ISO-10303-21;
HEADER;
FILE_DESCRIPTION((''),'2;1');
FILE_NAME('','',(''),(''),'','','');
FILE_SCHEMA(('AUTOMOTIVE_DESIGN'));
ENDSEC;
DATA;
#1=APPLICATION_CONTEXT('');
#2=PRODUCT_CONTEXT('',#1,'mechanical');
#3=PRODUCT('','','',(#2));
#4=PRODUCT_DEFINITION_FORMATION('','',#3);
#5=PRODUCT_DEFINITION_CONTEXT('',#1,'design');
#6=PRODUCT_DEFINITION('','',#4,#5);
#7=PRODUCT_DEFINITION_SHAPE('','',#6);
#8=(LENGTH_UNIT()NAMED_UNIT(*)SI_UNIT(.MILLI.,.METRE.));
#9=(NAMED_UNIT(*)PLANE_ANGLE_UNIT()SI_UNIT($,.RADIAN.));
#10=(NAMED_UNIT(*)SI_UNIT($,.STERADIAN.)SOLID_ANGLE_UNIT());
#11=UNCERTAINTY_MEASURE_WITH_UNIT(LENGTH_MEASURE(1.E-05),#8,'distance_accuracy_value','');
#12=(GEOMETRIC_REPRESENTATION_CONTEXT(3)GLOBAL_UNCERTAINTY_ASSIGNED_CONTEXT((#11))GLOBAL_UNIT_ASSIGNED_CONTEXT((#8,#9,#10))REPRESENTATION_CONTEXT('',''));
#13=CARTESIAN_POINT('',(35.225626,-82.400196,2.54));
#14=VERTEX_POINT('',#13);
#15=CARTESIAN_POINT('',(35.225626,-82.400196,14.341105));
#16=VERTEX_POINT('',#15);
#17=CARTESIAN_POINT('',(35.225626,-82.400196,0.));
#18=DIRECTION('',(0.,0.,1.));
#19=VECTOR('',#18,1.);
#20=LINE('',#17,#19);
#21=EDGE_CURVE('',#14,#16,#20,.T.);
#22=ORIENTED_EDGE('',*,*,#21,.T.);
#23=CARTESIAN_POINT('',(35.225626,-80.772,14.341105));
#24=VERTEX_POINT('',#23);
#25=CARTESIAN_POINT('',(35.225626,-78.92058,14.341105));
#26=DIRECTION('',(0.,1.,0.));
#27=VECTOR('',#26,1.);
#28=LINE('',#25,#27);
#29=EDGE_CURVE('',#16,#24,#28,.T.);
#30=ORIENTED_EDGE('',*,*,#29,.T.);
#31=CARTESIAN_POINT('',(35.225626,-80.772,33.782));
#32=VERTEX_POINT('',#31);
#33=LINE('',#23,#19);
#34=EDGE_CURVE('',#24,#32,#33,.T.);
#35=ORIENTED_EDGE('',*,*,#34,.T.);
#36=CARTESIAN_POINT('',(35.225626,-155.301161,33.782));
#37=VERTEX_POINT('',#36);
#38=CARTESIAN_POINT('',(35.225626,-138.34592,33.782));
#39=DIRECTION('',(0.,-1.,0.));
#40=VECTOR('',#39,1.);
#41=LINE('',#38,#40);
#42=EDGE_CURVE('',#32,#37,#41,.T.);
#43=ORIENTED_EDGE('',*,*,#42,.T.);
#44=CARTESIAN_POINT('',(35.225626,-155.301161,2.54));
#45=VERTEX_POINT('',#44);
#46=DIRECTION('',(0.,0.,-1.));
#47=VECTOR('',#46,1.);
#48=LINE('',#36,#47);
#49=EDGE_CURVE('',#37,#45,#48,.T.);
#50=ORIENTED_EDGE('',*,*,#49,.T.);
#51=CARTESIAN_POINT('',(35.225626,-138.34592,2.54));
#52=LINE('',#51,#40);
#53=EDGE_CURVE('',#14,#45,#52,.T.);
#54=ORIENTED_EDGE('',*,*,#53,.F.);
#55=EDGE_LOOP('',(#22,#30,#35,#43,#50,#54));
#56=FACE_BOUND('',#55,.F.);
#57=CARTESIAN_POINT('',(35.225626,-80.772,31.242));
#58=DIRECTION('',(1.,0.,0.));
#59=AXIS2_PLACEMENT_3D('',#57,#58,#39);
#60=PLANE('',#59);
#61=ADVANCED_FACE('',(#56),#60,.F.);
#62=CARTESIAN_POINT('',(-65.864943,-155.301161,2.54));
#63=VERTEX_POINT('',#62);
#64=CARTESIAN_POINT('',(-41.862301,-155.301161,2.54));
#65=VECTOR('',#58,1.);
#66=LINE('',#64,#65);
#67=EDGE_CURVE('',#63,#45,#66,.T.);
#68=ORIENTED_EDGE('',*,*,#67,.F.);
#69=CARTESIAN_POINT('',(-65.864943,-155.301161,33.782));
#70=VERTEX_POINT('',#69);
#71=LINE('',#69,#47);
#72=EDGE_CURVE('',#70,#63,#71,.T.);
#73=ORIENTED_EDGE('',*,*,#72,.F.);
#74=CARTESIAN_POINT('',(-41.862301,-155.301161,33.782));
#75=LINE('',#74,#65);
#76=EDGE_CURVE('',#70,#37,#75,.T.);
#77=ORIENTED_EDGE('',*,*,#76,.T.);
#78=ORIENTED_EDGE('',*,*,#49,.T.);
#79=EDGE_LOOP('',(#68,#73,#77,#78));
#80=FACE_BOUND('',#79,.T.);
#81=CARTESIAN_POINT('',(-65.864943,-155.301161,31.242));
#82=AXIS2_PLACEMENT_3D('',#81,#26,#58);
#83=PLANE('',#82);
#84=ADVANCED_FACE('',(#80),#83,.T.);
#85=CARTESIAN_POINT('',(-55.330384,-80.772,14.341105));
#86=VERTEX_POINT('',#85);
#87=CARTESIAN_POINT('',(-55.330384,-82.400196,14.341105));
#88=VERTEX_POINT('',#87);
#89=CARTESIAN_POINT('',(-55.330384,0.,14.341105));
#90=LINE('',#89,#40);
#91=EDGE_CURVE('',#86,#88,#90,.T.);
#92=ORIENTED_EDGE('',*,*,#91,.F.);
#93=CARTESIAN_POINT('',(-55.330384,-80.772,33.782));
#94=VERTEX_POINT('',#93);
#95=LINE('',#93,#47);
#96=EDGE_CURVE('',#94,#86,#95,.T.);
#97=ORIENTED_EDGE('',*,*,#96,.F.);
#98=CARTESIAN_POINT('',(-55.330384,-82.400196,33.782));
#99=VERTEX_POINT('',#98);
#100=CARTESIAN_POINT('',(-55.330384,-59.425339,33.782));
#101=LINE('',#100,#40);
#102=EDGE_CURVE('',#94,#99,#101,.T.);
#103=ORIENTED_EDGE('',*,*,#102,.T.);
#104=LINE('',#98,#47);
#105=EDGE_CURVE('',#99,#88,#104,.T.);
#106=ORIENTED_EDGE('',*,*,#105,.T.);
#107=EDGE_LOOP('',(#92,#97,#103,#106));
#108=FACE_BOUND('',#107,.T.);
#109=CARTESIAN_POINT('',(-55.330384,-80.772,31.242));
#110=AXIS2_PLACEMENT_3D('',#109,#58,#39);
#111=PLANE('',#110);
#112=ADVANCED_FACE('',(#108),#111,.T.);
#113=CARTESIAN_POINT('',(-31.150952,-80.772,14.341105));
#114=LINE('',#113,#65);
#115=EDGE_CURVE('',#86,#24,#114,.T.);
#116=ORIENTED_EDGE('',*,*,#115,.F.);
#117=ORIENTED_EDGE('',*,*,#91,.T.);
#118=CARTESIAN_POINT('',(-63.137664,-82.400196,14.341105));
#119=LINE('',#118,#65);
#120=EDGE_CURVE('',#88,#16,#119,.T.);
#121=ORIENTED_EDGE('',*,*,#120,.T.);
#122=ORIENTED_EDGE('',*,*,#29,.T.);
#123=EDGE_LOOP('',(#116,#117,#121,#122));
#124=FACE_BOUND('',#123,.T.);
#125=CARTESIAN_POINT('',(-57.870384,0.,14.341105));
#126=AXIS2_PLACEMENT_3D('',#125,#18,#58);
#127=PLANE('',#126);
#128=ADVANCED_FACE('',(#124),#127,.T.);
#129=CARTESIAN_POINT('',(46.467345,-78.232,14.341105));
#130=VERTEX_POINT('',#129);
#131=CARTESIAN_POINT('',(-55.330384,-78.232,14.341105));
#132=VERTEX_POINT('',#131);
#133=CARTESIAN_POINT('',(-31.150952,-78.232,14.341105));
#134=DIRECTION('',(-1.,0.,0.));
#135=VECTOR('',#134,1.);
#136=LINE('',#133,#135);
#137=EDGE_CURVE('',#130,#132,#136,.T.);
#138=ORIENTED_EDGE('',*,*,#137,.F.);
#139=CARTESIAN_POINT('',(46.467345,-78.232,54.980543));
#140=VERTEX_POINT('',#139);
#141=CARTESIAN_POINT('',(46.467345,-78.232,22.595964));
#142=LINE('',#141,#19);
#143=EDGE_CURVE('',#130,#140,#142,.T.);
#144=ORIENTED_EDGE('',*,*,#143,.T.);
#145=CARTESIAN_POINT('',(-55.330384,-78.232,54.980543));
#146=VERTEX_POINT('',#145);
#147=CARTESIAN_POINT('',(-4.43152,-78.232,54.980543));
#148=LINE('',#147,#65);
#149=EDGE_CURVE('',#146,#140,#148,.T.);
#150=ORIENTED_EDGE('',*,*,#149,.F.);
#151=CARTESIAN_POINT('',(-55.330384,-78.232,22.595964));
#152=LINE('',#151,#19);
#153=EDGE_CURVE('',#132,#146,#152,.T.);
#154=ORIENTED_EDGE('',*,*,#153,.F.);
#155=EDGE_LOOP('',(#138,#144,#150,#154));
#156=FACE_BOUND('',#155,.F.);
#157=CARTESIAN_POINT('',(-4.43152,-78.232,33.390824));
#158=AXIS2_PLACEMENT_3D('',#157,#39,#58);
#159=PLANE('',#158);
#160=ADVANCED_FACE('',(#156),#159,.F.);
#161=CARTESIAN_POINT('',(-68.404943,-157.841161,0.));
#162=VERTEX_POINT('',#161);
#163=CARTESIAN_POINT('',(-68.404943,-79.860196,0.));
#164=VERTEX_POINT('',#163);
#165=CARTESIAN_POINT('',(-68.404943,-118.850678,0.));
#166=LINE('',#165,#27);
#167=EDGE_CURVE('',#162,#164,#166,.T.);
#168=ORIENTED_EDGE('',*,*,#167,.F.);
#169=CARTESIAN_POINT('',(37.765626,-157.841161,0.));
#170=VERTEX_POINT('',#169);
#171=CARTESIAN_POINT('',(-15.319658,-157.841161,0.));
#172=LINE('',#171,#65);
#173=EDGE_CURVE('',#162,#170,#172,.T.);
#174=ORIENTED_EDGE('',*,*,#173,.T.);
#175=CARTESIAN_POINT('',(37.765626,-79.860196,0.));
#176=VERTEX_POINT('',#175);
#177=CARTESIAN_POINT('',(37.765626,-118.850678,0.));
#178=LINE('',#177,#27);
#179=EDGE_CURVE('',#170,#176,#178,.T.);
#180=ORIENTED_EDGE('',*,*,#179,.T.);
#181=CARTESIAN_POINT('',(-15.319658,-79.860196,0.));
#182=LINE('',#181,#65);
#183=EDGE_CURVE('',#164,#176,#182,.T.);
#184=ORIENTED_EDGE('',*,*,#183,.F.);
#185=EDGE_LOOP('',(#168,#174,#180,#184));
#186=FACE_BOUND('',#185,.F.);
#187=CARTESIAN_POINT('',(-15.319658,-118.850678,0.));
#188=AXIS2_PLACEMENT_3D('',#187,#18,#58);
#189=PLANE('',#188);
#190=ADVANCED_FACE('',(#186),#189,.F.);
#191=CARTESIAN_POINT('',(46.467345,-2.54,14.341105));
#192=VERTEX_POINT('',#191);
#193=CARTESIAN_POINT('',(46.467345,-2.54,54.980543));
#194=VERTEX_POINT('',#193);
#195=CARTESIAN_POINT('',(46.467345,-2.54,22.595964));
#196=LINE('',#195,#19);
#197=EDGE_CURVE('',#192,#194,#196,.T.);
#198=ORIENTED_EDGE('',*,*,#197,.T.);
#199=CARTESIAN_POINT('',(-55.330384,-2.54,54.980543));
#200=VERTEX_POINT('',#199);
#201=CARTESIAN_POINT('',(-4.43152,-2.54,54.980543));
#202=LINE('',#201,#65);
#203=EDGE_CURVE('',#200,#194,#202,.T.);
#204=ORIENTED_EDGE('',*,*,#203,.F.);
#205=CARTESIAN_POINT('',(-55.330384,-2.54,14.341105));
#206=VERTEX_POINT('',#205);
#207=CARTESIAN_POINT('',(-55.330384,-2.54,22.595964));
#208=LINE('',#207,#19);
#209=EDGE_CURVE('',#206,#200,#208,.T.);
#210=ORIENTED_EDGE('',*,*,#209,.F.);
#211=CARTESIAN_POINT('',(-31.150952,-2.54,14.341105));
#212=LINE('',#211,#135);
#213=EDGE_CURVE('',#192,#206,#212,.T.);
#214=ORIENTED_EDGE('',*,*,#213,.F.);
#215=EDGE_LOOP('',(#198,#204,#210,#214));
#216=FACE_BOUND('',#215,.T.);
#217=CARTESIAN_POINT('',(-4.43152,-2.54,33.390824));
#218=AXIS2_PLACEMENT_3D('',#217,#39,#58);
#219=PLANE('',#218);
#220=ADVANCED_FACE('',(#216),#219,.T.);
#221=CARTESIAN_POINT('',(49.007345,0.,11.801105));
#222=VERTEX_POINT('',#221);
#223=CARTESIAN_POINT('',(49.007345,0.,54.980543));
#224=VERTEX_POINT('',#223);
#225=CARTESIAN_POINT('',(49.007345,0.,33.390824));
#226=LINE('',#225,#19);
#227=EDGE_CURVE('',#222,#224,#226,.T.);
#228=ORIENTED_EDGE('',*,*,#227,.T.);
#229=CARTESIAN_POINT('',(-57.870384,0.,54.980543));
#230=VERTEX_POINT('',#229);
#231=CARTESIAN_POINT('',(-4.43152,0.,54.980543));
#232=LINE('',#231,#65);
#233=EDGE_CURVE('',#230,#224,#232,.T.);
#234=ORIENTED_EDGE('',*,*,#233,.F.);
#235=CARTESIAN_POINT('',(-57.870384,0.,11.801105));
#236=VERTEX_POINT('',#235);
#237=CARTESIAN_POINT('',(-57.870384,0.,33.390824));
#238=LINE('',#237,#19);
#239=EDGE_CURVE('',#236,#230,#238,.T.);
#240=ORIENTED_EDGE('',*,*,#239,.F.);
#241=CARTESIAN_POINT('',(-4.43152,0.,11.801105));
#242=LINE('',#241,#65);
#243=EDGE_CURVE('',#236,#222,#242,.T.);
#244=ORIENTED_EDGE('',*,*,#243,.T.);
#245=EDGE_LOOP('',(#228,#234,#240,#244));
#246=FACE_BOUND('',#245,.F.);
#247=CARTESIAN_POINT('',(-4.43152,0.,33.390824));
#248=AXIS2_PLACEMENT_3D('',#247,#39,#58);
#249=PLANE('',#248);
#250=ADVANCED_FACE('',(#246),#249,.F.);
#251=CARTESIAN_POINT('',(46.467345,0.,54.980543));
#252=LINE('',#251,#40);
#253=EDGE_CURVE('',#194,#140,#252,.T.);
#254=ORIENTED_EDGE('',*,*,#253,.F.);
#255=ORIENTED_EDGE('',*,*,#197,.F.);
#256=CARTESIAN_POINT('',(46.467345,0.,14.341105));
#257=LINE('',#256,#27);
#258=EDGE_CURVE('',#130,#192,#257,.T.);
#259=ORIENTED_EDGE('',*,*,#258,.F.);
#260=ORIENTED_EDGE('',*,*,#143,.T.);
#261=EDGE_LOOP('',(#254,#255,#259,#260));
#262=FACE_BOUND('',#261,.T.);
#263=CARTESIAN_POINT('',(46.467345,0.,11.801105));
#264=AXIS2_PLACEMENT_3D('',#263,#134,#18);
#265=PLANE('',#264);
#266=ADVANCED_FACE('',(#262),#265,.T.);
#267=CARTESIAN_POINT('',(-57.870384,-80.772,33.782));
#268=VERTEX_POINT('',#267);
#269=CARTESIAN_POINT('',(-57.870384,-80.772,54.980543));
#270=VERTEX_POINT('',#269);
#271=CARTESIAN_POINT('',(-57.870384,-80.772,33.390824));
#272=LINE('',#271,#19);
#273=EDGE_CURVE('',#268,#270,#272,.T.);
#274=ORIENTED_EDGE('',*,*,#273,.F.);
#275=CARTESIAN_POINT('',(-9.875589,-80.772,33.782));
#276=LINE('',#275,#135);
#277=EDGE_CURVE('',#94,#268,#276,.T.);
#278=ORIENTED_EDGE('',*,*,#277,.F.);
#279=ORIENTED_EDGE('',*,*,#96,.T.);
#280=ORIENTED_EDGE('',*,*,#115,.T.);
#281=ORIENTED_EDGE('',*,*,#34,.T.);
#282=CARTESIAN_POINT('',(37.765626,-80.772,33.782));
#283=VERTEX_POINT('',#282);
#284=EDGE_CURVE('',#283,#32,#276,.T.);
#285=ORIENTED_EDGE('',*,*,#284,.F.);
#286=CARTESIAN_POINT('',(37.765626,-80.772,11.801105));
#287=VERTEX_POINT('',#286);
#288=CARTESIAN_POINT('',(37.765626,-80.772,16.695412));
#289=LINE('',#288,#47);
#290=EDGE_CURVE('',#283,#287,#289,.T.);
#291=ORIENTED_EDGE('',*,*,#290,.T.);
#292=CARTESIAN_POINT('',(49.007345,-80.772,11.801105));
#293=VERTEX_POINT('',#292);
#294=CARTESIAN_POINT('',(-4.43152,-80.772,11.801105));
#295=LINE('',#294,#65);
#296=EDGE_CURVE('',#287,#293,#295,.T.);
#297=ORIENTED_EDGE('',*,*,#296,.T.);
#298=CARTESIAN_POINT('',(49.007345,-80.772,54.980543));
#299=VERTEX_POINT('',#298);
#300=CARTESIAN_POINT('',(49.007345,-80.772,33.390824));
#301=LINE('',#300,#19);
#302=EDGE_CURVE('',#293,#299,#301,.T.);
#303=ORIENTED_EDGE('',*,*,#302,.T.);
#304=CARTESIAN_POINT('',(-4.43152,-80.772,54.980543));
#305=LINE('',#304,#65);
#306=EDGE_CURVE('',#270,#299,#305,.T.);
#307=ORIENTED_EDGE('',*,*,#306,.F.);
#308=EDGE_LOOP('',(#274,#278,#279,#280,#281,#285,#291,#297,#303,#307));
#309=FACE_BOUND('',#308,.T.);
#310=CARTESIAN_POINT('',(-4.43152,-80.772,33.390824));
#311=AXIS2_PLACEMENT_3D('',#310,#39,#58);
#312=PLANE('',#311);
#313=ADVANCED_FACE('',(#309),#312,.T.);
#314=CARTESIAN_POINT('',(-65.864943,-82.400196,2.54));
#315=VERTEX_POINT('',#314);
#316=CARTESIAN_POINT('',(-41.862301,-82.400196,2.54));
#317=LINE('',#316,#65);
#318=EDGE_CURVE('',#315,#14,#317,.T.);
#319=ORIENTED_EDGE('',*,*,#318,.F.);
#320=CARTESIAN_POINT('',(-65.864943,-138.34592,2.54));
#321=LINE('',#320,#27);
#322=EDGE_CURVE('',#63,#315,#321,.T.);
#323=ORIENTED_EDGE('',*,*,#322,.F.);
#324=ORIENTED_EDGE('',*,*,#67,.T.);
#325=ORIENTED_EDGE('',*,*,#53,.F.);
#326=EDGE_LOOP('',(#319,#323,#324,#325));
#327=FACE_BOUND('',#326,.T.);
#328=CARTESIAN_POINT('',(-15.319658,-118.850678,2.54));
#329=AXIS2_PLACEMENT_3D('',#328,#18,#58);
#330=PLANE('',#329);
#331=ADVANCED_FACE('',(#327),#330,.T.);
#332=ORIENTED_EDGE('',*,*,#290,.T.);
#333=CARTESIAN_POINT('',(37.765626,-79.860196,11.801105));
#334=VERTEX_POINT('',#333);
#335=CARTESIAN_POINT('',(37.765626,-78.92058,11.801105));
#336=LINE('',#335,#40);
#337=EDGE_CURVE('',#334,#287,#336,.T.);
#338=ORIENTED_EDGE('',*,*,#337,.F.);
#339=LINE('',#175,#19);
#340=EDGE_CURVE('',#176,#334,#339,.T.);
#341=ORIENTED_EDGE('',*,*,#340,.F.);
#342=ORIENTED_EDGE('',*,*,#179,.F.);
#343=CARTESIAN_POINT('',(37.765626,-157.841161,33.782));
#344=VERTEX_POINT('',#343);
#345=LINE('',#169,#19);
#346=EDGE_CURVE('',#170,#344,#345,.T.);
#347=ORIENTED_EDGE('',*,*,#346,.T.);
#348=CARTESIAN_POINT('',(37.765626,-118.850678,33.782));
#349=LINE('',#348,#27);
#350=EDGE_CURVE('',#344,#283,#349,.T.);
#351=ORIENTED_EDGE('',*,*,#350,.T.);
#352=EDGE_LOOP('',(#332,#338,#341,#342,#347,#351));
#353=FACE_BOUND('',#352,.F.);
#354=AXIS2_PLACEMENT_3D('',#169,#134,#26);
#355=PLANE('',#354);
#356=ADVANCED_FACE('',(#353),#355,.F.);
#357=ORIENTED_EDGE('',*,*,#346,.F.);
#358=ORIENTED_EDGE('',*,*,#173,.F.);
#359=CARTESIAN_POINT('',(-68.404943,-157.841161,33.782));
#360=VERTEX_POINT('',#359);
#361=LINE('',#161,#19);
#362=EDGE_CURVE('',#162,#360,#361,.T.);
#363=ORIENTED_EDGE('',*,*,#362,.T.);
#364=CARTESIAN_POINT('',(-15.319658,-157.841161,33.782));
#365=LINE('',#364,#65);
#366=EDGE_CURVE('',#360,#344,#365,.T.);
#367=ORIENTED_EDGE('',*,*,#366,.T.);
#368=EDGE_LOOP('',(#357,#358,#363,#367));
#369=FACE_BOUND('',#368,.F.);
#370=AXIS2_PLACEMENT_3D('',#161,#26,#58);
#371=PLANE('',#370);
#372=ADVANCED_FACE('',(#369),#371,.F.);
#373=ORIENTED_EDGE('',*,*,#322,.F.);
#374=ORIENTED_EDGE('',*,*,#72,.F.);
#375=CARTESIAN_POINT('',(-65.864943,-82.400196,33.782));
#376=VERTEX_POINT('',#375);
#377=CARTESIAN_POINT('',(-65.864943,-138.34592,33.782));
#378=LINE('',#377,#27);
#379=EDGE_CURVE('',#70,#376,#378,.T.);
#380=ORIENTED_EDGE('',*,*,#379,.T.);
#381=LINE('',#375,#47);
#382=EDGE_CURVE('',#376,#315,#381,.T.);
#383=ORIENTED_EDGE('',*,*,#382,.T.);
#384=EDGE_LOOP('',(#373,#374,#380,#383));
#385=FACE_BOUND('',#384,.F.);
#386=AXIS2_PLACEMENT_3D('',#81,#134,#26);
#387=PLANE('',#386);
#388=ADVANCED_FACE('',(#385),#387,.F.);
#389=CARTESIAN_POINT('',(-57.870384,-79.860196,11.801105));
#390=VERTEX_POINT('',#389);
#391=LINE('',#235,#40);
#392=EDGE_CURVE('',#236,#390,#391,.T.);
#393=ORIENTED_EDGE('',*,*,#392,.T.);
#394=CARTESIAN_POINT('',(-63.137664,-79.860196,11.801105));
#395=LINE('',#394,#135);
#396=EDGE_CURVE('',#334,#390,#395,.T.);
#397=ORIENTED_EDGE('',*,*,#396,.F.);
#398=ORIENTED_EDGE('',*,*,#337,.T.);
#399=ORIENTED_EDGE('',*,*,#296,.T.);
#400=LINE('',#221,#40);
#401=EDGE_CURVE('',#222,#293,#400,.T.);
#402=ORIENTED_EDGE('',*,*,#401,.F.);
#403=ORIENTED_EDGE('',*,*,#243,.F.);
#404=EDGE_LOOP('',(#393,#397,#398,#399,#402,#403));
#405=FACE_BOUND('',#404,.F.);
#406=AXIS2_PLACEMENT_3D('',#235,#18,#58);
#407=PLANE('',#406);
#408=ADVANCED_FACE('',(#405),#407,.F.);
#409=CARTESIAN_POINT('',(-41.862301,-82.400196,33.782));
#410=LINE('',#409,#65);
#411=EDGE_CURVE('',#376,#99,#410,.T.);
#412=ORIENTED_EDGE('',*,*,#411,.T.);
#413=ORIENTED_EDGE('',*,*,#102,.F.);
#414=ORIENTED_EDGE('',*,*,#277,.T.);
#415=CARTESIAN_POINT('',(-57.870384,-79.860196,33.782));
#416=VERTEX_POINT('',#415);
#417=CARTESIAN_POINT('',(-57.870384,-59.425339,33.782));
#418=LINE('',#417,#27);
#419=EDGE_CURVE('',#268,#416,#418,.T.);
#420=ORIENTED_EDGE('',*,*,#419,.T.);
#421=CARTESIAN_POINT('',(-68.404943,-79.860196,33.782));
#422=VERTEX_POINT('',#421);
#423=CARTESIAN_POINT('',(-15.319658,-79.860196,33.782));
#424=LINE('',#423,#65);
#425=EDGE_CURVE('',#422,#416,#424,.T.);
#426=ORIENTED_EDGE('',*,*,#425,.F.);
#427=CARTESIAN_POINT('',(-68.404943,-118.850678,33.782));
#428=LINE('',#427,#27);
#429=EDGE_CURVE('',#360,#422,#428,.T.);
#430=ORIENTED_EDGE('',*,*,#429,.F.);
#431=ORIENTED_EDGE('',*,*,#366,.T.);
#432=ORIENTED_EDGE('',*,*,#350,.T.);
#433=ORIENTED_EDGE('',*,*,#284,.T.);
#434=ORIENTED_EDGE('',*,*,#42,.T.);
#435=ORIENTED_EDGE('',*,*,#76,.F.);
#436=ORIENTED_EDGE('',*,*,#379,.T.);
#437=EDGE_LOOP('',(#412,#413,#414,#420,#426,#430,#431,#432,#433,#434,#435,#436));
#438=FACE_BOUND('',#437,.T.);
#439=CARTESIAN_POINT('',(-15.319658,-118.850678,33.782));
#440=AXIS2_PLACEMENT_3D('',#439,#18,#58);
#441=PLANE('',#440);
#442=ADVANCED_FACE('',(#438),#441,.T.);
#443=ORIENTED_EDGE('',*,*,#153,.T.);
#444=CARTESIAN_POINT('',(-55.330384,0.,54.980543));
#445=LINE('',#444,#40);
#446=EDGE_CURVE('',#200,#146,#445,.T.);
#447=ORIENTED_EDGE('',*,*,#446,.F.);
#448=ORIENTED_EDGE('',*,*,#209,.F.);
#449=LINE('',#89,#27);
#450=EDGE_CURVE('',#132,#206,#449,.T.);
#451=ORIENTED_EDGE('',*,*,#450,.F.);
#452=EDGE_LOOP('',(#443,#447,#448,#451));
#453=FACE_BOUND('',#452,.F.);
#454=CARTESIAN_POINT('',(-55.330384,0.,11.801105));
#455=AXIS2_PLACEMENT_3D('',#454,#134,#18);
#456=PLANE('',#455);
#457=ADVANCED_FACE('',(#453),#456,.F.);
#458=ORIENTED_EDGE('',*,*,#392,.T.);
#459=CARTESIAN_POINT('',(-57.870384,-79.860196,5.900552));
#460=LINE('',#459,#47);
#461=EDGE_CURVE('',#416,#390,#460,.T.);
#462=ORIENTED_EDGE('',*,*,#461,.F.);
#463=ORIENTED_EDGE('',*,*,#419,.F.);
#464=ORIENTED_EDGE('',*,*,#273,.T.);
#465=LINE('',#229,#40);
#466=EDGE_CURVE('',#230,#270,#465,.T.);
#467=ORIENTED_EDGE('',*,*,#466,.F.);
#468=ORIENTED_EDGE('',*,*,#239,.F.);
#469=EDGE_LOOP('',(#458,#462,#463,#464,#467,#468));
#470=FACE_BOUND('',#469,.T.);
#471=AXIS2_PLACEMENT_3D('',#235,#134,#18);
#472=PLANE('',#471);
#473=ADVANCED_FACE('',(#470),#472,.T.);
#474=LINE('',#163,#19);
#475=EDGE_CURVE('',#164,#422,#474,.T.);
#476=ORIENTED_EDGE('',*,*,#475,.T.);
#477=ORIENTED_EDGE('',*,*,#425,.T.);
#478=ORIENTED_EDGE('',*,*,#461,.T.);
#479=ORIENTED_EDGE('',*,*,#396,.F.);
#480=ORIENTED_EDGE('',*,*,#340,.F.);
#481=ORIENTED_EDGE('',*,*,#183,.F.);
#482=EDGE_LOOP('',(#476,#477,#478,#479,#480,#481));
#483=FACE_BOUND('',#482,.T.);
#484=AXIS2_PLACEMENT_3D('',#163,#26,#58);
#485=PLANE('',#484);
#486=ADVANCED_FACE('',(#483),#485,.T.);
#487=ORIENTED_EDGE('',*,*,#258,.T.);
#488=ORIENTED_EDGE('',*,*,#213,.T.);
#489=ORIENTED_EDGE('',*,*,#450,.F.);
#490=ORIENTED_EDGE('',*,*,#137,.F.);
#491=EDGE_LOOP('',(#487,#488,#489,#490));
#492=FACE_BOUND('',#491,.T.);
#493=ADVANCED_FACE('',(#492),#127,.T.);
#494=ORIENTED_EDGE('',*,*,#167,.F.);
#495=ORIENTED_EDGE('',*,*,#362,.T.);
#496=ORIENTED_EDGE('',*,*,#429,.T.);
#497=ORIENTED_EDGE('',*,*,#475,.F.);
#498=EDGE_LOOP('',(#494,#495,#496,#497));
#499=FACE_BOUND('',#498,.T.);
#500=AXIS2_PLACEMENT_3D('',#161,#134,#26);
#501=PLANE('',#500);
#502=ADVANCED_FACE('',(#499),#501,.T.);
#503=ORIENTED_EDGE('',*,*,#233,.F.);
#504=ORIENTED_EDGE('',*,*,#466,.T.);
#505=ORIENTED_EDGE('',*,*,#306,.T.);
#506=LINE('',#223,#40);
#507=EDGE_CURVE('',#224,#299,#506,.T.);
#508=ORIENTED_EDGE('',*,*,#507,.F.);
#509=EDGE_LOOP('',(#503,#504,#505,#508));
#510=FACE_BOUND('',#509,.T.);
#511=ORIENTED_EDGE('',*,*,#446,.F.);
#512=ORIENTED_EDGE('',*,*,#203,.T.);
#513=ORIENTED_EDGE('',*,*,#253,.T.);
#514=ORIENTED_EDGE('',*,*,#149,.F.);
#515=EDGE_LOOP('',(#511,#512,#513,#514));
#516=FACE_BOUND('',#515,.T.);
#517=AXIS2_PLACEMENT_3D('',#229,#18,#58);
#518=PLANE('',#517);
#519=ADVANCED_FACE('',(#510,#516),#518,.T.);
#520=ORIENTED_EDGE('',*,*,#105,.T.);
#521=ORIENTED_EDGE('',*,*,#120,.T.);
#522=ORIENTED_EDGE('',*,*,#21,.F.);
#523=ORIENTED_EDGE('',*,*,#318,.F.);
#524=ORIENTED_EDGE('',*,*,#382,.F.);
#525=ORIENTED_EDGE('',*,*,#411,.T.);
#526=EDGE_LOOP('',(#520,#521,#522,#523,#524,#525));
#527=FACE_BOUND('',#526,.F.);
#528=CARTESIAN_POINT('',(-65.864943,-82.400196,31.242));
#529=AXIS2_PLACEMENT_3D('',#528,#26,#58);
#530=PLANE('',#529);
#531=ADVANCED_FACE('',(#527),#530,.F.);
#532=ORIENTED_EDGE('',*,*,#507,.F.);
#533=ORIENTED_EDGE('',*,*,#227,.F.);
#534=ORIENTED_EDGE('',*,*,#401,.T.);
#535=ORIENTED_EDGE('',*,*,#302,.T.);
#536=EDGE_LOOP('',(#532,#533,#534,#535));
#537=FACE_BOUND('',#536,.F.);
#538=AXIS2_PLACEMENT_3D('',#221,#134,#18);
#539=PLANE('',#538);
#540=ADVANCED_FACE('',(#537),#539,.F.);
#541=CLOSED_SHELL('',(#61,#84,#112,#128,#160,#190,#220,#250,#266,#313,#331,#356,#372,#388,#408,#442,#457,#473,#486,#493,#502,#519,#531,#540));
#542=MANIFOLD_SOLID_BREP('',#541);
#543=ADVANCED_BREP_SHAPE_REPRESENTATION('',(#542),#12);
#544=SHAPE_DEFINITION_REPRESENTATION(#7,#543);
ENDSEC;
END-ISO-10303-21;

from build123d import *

# Parameters (mm, degrees)
F0_W     = 106.8777292967
F0_H     = 43.1794375181
F1_DEPTH = 80.772
F2_T     = -2.54
F3_W     = 106.1705686152
F3_H     = 77.9809653759
F4_DEPTH = 33.782
F5_T     = -2.54


# Not quite as in the source:
# - a shell that OpenCascade refuses in one call is made with other operations: the cavity is built on its own and cut out


with BuildPart() as f1:
    # F0 (on Front) → F1 (new body)
    with BuildSketch(Plane.XZ):
        with Locations((-4.4315196574, 33.3908237517)):
            Rectangle(F0_W, F0_H)
    extrude(amount=F1_DEPTH)

    # F2
    f2_openings = [f1.faces().sort_by_distance(p)[0] for p in [
        (-4.43152, -40.386, 54.980543),
    ]]
    offset(amount=F2_T, openings=f2_openings)

    # F3 (on Top) → F4 (join)
    with BuildSketch(Plane.XY):
        with Locations((-15.3196584433, -118.8506782055)):
            Rectangle(F3_W, F3_H)
    extrude(amount=F4_DEPTH)

    # F5: a shell. OpenCascade refuses it in one call, so the cavity is built on its own and cut out:
    # the body offset inwards by the wall thickness, plus a prism from it out through each open face.
    f5_core = offset(f1.part, amount=F5_T, kind=Kind.INTERSECTION, mode=Mode.PRIVATE)
    f5_exits = [f5_core.faces().sort_by_distance(p)[0] for p in [
        (-15.216343, -118.119753, 31.242),
    ]]
    add(f5_core, mode=Mode.SUBTRACT)
    extrude(f5_exits, amount=-F5_T, mode=Mode.SUBTRACT)


solid = f1.part
